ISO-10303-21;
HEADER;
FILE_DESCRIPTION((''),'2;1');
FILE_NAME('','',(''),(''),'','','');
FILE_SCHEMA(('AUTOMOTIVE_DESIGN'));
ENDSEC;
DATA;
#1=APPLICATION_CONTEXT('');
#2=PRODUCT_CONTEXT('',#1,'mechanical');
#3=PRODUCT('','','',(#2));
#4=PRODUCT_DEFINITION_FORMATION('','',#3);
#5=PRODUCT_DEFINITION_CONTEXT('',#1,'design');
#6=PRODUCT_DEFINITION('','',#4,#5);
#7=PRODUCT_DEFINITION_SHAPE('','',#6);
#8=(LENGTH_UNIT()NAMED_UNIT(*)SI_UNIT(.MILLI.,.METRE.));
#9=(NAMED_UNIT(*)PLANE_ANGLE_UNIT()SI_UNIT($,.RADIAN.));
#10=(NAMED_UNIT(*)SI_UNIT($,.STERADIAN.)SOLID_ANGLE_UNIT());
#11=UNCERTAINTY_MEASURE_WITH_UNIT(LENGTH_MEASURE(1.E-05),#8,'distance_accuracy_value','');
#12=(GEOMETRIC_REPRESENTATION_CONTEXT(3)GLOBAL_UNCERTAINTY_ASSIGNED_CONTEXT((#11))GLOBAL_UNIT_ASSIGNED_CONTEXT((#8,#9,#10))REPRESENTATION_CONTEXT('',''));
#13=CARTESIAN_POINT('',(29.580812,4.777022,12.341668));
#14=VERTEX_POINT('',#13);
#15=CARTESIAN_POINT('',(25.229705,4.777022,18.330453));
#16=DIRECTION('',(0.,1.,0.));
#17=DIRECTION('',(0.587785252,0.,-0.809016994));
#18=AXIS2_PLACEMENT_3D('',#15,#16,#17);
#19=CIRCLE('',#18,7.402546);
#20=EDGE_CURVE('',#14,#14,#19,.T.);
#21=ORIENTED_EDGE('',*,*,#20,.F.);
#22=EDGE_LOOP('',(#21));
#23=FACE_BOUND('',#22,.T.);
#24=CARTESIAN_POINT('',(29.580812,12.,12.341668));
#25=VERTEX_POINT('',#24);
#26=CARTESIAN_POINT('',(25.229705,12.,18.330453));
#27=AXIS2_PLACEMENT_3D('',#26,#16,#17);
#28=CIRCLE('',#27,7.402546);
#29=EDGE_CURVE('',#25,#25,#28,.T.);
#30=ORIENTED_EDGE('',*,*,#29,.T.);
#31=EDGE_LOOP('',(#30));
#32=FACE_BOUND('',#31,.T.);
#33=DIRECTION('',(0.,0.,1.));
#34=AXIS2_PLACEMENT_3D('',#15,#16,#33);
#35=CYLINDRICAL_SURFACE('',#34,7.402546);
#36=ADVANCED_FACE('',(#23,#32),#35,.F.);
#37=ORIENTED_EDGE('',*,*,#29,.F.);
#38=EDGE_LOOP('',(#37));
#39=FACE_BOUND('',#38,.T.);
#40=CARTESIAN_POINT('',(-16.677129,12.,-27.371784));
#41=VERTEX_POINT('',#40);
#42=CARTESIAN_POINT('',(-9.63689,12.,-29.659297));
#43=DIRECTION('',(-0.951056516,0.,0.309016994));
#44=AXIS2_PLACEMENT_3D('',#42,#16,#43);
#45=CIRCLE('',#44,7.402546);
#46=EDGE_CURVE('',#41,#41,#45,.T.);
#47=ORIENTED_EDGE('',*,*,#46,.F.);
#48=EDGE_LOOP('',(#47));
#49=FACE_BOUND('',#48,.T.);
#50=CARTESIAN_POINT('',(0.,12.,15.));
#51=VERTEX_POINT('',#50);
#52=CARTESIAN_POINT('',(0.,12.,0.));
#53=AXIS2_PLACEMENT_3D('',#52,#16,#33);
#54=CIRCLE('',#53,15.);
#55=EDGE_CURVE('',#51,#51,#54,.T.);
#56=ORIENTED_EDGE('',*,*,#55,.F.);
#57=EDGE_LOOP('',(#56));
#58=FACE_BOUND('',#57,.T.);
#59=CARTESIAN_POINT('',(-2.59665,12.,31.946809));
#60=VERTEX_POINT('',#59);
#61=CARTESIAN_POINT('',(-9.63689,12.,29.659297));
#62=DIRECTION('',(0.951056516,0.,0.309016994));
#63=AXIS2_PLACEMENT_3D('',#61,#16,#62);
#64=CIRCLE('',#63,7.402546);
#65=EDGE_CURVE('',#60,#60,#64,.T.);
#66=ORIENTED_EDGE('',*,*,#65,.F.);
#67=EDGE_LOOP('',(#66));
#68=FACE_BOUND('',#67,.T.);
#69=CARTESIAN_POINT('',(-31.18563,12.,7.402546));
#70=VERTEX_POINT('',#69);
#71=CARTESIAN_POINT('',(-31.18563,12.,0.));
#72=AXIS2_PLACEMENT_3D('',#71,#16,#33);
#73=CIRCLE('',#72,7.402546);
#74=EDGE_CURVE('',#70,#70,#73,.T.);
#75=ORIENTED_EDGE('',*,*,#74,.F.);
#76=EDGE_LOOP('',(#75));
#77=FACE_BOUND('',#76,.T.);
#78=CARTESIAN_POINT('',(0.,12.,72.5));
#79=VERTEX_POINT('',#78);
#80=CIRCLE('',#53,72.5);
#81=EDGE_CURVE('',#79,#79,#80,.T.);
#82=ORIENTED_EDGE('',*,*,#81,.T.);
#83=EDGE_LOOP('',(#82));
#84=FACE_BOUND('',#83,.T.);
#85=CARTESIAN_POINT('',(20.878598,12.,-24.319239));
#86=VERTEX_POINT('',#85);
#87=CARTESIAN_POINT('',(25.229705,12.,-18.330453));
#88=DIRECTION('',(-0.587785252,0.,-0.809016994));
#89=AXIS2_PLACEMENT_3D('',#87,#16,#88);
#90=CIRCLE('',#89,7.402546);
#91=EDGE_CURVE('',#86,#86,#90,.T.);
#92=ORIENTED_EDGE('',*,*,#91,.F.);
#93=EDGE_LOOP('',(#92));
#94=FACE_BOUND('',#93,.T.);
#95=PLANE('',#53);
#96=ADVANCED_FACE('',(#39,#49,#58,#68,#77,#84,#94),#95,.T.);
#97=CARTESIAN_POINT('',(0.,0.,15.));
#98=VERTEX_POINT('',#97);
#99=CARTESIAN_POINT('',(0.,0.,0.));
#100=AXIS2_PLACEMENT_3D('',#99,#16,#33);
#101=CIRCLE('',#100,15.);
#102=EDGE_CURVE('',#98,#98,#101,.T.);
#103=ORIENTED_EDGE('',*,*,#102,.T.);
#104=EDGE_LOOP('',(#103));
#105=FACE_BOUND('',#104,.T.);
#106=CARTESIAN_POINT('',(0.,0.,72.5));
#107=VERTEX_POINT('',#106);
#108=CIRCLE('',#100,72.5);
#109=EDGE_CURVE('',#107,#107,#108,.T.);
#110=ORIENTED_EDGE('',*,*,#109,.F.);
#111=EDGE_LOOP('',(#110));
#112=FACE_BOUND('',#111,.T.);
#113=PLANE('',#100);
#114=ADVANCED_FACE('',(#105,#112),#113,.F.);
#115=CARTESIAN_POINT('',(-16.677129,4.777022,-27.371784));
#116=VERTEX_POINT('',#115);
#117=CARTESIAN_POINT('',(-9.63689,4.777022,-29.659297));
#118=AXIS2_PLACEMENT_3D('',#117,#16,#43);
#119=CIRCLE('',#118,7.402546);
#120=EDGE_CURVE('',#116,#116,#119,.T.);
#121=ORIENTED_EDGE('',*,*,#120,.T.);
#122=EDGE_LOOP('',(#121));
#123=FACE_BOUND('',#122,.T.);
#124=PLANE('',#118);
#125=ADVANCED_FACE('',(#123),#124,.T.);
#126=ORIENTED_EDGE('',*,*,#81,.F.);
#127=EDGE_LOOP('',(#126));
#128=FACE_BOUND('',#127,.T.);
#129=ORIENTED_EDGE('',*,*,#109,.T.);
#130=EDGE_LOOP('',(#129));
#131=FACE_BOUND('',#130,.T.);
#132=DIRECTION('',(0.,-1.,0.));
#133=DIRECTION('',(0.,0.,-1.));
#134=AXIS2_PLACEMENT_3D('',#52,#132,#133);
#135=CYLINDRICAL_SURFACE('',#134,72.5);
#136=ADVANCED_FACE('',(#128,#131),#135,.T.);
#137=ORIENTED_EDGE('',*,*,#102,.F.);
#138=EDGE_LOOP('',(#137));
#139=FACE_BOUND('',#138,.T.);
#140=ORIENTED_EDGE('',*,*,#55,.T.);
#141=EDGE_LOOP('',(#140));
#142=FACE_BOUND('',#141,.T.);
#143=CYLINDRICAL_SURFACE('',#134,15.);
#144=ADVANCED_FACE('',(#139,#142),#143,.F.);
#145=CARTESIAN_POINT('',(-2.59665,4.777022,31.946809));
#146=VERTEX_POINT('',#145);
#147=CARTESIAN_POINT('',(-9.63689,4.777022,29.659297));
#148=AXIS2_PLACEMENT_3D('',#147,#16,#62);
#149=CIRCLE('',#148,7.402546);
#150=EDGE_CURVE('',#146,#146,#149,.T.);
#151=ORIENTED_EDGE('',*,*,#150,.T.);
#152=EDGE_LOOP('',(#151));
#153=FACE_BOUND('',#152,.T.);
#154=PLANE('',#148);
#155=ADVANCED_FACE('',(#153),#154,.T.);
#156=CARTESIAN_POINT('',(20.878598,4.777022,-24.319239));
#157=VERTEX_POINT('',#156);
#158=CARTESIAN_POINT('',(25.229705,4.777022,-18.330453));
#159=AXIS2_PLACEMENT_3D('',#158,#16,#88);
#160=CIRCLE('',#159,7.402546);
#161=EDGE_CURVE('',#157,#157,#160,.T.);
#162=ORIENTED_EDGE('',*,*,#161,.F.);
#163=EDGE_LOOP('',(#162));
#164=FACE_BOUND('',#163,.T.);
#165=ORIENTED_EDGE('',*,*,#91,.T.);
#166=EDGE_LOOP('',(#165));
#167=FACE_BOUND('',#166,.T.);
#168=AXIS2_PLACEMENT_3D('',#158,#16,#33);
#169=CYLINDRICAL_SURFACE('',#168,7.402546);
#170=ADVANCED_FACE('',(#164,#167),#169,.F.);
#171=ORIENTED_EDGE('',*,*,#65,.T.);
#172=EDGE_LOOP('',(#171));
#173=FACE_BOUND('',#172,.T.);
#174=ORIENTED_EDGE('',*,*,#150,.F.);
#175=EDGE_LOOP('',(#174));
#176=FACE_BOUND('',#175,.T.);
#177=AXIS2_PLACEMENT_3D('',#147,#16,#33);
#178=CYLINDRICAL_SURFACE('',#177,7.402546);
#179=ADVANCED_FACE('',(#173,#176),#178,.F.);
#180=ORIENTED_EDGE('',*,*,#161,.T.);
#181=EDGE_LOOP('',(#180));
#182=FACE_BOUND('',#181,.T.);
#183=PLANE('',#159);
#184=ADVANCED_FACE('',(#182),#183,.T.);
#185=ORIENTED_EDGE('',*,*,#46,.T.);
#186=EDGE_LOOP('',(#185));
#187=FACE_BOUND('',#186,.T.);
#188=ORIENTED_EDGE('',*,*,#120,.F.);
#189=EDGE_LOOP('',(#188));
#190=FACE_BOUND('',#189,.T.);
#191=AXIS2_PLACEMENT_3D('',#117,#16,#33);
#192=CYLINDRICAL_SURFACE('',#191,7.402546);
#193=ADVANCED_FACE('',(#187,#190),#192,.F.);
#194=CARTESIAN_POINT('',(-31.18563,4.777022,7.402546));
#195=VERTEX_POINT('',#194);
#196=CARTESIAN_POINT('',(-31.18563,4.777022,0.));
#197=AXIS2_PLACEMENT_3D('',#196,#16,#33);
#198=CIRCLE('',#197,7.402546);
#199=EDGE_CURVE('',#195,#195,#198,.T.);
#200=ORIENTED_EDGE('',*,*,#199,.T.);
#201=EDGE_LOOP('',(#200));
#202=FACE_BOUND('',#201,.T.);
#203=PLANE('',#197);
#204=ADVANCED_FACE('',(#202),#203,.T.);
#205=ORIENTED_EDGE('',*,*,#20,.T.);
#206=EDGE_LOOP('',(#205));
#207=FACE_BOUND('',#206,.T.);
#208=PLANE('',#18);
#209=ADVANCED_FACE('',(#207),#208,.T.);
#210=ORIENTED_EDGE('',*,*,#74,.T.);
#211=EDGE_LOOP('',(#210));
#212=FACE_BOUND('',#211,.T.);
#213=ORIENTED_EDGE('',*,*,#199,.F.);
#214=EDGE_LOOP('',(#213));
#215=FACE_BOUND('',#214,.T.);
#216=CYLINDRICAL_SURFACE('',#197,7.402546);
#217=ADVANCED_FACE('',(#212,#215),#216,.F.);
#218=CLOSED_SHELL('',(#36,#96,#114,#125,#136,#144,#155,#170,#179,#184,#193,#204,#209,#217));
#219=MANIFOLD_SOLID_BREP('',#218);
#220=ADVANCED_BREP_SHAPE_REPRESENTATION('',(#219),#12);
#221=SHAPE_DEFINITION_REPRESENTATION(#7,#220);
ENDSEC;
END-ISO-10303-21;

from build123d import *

# Parameters (mm, degrees)
SKETCH1_R           = 72.5
BOSS_EXTRUDE1_DEPTH = 12
SKETCH2_R           = 15
CUT_EXTRUDE1_DEPTH  = 104.230325002
SKETCH3_R           = 7.402545608
CUT_EXTRUDE2_DEPTH  = 7.222978458
CIRPATTERN1_COUNT   = 5


with BuildPart() as part:
    # Sketch1 → Boss-Extrude1 (new body)
    with BuildSketch(Plane(origin=(0, 0, 0), x_dir=(1, 0, 0), z_dir=(0, 1, 0))):
        Circle(SKETCH1_R)
    extrude(amount=BOSS_EXTRUDE1_DEPTH)

    # Sketch2 → Cut-Extrude1 (cut, through all)
    with BuildSketch(Plane(origin=(0, 0, 0), x_dir=(1, 0, 0), z_dir=(0, 1, 0))):
        Circle(SKETCH2_R)
    extrude(amount=CUT_EXTRUDE1_DEPTH, mode=Mode.SUBTRACT)

    # Sketch3 → Cut-Extrude2 (cut)
    with BuildSketch(Plane(origin=(0, 12, 0), x_dir=(1, 0, 0), z_dir=(0, 1, 0))):
        with Locations((-31.185630014, 0)):
            Circle(SKETCH3_R)
    cut_extrude2 = extrude(amount=-CUT_EXTRUDE2_DEPTH, mode=Mode.SUBTRACT)

    # CirPattern1: Cut-Extrude2 ×5 about axis
    cirpattern1_axis = Axis((0, 0, 0), (0, 1, 0))
    for i in range(1, CIRPATTERN1_COUNT):
        add(cut_extrude2.rotate(cirpattern1_axis, i * 360 / CIRPATTERN1_COUNT), mode=Mode.SUBTRACT)


solid = part.part
